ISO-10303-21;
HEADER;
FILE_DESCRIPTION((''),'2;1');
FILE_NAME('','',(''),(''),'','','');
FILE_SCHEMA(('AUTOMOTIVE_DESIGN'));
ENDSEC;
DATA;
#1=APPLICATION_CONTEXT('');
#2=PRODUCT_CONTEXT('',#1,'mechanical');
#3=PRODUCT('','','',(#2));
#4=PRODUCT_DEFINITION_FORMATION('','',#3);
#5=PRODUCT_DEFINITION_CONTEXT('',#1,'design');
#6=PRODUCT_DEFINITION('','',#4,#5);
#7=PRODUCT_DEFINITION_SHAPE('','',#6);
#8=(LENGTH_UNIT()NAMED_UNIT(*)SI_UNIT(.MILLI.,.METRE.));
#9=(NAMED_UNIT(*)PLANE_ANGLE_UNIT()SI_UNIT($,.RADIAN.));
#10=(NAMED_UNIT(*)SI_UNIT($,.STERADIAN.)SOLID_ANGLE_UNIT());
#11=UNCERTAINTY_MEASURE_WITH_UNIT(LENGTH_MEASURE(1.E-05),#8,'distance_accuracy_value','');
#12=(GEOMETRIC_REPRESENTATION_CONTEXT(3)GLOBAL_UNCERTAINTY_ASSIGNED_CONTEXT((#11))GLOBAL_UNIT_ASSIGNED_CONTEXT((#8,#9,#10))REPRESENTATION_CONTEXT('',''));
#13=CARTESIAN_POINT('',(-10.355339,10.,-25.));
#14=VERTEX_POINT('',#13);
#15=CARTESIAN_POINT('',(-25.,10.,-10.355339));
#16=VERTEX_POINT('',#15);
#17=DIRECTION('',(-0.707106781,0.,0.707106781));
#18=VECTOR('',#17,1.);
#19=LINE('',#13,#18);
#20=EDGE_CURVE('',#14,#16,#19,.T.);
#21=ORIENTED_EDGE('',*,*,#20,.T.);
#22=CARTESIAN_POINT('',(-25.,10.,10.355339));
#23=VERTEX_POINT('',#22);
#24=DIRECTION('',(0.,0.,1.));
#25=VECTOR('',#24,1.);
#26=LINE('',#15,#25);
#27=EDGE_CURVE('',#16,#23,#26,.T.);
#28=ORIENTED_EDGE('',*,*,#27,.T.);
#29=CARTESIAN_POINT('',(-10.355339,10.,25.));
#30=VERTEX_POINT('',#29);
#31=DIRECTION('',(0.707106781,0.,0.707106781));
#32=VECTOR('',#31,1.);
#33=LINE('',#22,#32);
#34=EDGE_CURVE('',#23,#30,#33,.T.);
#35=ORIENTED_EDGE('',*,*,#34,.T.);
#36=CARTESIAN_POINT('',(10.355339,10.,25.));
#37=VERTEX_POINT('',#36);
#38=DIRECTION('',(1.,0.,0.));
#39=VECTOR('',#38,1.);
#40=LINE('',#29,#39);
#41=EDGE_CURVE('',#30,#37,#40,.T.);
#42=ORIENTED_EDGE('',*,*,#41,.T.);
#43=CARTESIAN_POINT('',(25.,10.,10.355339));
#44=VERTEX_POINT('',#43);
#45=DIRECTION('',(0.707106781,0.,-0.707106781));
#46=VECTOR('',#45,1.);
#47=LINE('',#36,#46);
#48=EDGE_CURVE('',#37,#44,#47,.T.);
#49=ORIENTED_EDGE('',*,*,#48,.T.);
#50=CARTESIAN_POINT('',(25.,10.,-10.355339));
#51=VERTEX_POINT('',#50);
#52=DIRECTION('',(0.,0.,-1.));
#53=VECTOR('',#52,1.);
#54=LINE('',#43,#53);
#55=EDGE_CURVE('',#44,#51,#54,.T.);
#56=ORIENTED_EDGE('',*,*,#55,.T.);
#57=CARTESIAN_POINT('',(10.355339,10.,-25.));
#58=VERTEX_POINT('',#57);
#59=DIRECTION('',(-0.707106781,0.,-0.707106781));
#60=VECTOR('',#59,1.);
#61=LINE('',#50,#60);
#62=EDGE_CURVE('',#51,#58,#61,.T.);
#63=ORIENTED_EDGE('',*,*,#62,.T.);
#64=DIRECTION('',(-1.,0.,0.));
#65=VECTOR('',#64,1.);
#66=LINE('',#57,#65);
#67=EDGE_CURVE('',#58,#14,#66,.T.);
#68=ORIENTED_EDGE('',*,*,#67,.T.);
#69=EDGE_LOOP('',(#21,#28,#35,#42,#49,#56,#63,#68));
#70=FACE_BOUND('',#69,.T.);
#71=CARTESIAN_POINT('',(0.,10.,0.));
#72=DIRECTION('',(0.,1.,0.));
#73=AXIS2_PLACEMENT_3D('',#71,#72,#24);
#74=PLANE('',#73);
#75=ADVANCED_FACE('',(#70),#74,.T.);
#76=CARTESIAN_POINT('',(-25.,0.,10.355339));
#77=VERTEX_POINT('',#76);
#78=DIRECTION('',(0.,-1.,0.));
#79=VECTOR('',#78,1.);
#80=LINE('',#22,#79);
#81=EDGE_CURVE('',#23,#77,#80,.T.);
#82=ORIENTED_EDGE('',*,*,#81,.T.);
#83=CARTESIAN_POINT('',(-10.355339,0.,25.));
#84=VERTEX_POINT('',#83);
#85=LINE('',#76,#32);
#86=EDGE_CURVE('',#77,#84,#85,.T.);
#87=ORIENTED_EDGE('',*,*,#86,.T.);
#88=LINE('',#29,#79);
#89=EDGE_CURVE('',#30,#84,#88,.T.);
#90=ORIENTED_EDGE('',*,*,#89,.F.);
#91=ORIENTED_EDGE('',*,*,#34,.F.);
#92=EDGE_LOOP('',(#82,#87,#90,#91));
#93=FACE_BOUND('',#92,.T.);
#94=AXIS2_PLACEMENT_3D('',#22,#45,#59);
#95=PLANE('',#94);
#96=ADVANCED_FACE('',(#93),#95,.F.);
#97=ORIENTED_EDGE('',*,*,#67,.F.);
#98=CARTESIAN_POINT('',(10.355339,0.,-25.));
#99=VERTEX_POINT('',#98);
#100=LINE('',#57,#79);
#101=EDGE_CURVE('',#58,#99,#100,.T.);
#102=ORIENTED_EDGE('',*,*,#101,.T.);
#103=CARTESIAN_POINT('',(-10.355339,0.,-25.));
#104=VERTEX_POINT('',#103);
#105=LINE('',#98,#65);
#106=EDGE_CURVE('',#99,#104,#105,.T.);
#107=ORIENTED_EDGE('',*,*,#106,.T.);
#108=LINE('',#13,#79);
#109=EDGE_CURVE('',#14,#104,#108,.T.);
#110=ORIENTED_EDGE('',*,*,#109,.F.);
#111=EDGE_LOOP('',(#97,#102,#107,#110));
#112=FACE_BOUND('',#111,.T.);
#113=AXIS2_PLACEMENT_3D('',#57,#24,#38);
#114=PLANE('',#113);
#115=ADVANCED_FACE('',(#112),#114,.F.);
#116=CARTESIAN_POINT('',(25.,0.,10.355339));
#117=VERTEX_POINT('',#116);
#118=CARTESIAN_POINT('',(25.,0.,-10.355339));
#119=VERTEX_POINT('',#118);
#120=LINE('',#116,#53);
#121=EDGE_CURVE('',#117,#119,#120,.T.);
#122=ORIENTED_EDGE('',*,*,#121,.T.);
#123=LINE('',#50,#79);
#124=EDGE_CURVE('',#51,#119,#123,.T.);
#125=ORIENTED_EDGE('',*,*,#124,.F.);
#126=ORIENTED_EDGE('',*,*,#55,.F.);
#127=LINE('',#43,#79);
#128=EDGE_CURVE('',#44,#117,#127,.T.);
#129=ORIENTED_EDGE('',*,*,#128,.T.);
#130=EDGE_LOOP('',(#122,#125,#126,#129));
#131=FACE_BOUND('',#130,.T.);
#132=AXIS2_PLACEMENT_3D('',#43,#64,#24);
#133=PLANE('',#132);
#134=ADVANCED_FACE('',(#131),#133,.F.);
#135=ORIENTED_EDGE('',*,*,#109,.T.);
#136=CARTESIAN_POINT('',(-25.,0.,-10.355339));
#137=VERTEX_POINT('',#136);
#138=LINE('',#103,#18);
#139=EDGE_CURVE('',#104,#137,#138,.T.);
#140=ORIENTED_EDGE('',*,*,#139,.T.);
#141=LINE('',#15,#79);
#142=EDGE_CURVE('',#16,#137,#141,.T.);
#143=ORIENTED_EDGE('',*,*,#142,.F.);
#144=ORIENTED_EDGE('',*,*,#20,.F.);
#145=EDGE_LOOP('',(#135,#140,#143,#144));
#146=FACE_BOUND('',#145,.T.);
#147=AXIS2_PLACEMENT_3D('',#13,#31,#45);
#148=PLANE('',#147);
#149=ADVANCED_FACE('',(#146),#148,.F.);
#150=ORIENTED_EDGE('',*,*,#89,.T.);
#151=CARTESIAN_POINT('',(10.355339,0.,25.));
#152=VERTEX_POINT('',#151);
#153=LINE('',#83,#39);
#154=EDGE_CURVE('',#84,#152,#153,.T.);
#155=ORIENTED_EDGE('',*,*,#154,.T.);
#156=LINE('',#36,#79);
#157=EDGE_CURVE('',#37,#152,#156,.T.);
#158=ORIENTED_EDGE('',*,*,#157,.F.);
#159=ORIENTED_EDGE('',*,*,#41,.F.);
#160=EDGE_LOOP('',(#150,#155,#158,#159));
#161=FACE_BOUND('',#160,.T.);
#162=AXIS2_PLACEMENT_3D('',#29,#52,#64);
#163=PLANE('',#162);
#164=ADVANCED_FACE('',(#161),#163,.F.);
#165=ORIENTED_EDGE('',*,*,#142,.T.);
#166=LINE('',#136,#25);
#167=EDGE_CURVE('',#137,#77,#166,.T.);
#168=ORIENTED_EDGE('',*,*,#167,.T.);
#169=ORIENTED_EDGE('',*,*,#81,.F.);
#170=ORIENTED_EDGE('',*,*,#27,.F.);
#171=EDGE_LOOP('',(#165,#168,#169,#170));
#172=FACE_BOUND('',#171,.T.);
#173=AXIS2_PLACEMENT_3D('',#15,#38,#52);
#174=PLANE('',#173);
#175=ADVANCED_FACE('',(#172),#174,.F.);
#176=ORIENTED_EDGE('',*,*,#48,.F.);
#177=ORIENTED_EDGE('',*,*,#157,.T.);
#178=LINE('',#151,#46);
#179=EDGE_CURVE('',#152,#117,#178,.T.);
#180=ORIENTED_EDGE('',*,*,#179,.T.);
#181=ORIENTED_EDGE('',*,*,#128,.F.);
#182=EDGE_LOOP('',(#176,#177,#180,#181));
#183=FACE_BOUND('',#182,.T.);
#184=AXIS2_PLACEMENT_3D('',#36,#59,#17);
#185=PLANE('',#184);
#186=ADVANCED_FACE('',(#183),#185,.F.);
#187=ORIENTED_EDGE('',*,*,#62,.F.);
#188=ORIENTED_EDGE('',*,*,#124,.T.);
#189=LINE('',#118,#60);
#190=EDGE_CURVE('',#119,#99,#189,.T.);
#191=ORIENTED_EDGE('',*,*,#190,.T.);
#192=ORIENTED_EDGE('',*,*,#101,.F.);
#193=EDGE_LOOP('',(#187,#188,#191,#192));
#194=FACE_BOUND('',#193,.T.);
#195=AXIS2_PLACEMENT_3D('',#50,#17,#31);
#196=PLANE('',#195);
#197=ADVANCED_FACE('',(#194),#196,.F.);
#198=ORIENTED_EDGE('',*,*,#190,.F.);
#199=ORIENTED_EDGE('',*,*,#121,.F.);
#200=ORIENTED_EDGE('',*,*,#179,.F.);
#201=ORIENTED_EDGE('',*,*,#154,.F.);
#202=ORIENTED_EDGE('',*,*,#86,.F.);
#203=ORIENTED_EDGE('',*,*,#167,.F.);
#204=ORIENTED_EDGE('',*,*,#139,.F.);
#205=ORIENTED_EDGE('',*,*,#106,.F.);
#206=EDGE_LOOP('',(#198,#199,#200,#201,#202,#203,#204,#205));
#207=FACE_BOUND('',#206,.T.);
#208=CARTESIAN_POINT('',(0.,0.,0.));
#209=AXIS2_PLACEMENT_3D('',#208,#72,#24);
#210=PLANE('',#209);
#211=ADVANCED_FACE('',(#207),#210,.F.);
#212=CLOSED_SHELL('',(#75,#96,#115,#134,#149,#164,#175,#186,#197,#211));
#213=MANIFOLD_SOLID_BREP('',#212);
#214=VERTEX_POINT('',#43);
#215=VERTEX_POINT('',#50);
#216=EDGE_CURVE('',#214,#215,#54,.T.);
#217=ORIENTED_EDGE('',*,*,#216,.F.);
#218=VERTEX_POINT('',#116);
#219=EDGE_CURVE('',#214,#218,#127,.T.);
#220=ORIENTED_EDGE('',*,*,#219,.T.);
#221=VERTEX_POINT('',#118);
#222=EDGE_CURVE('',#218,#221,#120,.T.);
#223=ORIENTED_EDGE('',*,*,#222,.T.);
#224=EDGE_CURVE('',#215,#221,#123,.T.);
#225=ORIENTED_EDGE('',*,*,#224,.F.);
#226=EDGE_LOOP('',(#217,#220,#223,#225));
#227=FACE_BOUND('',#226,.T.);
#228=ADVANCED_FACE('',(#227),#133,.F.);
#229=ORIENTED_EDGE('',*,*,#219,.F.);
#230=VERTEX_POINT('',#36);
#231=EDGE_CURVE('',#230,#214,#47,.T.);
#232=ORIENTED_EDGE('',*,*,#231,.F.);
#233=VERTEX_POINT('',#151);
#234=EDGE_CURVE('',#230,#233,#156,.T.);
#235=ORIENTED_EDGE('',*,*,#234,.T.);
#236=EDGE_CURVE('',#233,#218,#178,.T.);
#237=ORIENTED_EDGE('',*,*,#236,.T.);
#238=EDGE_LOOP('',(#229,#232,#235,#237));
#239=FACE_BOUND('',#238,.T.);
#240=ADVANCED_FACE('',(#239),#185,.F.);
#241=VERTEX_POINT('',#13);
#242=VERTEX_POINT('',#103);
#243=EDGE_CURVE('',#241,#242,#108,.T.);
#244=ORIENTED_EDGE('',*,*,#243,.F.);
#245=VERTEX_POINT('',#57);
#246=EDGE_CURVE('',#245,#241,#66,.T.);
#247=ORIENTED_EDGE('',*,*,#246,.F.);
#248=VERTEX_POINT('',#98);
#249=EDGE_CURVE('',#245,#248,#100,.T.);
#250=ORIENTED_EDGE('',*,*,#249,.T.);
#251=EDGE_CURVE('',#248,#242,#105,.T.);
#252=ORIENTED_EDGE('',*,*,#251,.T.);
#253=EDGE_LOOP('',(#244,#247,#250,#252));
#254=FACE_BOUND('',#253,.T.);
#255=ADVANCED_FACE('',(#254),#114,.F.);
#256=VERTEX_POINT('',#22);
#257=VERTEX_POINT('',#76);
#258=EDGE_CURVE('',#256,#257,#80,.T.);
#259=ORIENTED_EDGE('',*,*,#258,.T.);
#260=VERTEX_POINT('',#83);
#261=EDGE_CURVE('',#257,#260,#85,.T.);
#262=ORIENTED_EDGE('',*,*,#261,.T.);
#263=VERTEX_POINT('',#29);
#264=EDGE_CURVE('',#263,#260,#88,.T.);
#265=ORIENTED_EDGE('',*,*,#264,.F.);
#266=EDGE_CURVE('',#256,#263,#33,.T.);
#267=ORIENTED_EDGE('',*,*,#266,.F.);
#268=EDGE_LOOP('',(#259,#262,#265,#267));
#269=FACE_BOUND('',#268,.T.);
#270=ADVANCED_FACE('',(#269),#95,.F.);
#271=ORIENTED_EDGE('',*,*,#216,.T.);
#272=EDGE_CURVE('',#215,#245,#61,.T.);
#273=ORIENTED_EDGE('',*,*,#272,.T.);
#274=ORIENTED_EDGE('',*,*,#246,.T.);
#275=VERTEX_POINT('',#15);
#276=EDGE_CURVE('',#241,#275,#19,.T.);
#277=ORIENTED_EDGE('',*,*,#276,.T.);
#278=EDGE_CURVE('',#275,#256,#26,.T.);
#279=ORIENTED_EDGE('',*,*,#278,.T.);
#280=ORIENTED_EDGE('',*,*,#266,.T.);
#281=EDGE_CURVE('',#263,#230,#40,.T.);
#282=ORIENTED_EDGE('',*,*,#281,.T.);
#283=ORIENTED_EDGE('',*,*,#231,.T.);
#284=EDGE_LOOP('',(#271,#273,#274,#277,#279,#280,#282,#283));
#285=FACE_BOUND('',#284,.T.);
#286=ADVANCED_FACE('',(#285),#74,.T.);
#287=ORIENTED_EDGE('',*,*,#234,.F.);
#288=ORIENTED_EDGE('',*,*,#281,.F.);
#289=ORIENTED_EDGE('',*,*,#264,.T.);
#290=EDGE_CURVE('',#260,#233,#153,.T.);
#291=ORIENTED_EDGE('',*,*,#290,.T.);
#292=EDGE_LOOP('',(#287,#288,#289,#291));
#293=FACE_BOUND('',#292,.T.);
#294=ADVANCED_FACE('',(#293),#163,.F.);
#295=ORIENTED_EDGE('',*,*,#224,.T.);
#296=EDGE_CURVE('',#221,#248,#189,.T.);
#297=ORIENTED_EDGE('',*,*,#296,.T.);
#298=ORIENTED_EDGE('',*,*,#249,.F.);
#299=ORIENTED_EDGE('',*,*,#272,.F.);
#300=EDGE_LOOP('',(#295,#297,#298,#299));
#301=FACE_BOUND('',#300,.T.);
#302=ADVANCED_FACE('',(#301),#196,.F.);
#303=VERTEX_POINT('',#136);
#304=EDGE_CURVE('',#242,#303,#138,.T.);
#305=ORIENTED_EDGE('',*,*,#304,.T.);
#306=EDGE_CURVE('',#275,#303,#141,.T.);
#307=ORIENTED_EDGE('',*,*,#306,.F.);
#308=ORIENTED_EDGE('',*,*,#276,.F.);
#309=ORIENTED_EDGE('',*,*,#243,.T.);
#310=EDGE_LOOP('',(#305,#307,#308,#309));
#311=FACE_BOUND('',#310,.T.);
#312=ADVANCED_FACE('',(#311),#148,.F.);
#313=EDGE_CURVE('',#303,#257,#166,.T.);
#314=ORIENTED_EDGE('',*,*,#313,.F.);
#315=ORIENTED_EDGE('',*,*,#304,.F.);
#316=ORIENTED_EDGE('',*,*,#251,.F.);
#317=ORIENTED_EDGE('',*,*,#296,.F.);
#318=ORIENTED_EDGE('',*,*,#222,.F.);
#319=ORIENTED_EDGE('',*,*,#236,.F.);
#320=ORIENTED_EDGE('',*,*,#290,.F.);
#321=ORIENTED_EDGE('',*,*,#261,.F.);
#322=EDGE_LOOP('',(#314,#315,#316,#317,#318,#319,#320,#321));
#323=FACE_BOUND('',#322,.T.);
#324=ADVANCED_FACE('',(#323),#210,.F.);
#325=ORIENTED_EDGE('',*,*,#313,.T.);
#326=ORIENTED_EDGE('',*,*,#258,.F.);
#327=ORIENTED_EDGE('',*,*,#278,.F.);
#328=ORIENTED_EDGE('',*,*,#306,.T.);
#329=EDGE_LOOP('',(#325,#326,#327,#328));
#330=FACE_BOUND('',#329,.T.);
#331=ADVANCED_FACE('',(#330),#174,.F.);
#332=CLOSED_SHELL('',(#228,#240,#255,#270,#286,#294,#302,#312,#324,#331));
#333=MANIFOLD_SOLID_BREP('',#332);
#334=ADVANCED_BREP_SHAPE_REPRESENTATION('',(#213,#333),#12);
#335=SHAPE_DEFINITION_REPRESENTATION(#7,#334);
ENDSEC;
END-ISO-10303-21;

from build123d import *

# Parameters (mm, degrees)
BOSS_EXTRUDE1_DEPTH   = 10
BODY_MOVE_COPY1_DEPTH = 10


# Read off the part's stored shape, not the designer's step: Body-Move/Copy1
with BuildPart() as part:
    # Sketch1 → Boss-Extrude1 (new body)
    with BuildSketch(Plane(origin=(0, 0, 0), x_dir=(1, 0, 0), z_dir=(0, 1, 0))):
        Polygon((-10.355339059, 25), (-25, 10.355339059), (-25, -10.355339059), (-10.355339059, -25), (10.355339059, -25), (25, -10.355339059), (25, 10.355339059), (10.355339059, 25), align=None)
    extrude(amount=BOSS_EXTRUDE1_DEPTH)


with BuildPart() as body_2:
    # Body-Move/Copy1 outline → Body-Move/Copy1 (new body)
    with BuildSketch(Plane(origin=(0, 0, 0), x_dir=(1, 0, 0), z_dir=(0, 1, 0))):
        Polygon((10.355339059, 25), (-10.355339059, 25), (-25, 10.355339059), (-25, -10.355339059), (-10.355339059, -25), (10.355339059, -25), (25, -10.355339059), (25, 10.355339059), align=None)
    extrude(amount=BODY_MOVE_COPY1_DEPTH)


solid = Compound([part.part, body_2.part])
